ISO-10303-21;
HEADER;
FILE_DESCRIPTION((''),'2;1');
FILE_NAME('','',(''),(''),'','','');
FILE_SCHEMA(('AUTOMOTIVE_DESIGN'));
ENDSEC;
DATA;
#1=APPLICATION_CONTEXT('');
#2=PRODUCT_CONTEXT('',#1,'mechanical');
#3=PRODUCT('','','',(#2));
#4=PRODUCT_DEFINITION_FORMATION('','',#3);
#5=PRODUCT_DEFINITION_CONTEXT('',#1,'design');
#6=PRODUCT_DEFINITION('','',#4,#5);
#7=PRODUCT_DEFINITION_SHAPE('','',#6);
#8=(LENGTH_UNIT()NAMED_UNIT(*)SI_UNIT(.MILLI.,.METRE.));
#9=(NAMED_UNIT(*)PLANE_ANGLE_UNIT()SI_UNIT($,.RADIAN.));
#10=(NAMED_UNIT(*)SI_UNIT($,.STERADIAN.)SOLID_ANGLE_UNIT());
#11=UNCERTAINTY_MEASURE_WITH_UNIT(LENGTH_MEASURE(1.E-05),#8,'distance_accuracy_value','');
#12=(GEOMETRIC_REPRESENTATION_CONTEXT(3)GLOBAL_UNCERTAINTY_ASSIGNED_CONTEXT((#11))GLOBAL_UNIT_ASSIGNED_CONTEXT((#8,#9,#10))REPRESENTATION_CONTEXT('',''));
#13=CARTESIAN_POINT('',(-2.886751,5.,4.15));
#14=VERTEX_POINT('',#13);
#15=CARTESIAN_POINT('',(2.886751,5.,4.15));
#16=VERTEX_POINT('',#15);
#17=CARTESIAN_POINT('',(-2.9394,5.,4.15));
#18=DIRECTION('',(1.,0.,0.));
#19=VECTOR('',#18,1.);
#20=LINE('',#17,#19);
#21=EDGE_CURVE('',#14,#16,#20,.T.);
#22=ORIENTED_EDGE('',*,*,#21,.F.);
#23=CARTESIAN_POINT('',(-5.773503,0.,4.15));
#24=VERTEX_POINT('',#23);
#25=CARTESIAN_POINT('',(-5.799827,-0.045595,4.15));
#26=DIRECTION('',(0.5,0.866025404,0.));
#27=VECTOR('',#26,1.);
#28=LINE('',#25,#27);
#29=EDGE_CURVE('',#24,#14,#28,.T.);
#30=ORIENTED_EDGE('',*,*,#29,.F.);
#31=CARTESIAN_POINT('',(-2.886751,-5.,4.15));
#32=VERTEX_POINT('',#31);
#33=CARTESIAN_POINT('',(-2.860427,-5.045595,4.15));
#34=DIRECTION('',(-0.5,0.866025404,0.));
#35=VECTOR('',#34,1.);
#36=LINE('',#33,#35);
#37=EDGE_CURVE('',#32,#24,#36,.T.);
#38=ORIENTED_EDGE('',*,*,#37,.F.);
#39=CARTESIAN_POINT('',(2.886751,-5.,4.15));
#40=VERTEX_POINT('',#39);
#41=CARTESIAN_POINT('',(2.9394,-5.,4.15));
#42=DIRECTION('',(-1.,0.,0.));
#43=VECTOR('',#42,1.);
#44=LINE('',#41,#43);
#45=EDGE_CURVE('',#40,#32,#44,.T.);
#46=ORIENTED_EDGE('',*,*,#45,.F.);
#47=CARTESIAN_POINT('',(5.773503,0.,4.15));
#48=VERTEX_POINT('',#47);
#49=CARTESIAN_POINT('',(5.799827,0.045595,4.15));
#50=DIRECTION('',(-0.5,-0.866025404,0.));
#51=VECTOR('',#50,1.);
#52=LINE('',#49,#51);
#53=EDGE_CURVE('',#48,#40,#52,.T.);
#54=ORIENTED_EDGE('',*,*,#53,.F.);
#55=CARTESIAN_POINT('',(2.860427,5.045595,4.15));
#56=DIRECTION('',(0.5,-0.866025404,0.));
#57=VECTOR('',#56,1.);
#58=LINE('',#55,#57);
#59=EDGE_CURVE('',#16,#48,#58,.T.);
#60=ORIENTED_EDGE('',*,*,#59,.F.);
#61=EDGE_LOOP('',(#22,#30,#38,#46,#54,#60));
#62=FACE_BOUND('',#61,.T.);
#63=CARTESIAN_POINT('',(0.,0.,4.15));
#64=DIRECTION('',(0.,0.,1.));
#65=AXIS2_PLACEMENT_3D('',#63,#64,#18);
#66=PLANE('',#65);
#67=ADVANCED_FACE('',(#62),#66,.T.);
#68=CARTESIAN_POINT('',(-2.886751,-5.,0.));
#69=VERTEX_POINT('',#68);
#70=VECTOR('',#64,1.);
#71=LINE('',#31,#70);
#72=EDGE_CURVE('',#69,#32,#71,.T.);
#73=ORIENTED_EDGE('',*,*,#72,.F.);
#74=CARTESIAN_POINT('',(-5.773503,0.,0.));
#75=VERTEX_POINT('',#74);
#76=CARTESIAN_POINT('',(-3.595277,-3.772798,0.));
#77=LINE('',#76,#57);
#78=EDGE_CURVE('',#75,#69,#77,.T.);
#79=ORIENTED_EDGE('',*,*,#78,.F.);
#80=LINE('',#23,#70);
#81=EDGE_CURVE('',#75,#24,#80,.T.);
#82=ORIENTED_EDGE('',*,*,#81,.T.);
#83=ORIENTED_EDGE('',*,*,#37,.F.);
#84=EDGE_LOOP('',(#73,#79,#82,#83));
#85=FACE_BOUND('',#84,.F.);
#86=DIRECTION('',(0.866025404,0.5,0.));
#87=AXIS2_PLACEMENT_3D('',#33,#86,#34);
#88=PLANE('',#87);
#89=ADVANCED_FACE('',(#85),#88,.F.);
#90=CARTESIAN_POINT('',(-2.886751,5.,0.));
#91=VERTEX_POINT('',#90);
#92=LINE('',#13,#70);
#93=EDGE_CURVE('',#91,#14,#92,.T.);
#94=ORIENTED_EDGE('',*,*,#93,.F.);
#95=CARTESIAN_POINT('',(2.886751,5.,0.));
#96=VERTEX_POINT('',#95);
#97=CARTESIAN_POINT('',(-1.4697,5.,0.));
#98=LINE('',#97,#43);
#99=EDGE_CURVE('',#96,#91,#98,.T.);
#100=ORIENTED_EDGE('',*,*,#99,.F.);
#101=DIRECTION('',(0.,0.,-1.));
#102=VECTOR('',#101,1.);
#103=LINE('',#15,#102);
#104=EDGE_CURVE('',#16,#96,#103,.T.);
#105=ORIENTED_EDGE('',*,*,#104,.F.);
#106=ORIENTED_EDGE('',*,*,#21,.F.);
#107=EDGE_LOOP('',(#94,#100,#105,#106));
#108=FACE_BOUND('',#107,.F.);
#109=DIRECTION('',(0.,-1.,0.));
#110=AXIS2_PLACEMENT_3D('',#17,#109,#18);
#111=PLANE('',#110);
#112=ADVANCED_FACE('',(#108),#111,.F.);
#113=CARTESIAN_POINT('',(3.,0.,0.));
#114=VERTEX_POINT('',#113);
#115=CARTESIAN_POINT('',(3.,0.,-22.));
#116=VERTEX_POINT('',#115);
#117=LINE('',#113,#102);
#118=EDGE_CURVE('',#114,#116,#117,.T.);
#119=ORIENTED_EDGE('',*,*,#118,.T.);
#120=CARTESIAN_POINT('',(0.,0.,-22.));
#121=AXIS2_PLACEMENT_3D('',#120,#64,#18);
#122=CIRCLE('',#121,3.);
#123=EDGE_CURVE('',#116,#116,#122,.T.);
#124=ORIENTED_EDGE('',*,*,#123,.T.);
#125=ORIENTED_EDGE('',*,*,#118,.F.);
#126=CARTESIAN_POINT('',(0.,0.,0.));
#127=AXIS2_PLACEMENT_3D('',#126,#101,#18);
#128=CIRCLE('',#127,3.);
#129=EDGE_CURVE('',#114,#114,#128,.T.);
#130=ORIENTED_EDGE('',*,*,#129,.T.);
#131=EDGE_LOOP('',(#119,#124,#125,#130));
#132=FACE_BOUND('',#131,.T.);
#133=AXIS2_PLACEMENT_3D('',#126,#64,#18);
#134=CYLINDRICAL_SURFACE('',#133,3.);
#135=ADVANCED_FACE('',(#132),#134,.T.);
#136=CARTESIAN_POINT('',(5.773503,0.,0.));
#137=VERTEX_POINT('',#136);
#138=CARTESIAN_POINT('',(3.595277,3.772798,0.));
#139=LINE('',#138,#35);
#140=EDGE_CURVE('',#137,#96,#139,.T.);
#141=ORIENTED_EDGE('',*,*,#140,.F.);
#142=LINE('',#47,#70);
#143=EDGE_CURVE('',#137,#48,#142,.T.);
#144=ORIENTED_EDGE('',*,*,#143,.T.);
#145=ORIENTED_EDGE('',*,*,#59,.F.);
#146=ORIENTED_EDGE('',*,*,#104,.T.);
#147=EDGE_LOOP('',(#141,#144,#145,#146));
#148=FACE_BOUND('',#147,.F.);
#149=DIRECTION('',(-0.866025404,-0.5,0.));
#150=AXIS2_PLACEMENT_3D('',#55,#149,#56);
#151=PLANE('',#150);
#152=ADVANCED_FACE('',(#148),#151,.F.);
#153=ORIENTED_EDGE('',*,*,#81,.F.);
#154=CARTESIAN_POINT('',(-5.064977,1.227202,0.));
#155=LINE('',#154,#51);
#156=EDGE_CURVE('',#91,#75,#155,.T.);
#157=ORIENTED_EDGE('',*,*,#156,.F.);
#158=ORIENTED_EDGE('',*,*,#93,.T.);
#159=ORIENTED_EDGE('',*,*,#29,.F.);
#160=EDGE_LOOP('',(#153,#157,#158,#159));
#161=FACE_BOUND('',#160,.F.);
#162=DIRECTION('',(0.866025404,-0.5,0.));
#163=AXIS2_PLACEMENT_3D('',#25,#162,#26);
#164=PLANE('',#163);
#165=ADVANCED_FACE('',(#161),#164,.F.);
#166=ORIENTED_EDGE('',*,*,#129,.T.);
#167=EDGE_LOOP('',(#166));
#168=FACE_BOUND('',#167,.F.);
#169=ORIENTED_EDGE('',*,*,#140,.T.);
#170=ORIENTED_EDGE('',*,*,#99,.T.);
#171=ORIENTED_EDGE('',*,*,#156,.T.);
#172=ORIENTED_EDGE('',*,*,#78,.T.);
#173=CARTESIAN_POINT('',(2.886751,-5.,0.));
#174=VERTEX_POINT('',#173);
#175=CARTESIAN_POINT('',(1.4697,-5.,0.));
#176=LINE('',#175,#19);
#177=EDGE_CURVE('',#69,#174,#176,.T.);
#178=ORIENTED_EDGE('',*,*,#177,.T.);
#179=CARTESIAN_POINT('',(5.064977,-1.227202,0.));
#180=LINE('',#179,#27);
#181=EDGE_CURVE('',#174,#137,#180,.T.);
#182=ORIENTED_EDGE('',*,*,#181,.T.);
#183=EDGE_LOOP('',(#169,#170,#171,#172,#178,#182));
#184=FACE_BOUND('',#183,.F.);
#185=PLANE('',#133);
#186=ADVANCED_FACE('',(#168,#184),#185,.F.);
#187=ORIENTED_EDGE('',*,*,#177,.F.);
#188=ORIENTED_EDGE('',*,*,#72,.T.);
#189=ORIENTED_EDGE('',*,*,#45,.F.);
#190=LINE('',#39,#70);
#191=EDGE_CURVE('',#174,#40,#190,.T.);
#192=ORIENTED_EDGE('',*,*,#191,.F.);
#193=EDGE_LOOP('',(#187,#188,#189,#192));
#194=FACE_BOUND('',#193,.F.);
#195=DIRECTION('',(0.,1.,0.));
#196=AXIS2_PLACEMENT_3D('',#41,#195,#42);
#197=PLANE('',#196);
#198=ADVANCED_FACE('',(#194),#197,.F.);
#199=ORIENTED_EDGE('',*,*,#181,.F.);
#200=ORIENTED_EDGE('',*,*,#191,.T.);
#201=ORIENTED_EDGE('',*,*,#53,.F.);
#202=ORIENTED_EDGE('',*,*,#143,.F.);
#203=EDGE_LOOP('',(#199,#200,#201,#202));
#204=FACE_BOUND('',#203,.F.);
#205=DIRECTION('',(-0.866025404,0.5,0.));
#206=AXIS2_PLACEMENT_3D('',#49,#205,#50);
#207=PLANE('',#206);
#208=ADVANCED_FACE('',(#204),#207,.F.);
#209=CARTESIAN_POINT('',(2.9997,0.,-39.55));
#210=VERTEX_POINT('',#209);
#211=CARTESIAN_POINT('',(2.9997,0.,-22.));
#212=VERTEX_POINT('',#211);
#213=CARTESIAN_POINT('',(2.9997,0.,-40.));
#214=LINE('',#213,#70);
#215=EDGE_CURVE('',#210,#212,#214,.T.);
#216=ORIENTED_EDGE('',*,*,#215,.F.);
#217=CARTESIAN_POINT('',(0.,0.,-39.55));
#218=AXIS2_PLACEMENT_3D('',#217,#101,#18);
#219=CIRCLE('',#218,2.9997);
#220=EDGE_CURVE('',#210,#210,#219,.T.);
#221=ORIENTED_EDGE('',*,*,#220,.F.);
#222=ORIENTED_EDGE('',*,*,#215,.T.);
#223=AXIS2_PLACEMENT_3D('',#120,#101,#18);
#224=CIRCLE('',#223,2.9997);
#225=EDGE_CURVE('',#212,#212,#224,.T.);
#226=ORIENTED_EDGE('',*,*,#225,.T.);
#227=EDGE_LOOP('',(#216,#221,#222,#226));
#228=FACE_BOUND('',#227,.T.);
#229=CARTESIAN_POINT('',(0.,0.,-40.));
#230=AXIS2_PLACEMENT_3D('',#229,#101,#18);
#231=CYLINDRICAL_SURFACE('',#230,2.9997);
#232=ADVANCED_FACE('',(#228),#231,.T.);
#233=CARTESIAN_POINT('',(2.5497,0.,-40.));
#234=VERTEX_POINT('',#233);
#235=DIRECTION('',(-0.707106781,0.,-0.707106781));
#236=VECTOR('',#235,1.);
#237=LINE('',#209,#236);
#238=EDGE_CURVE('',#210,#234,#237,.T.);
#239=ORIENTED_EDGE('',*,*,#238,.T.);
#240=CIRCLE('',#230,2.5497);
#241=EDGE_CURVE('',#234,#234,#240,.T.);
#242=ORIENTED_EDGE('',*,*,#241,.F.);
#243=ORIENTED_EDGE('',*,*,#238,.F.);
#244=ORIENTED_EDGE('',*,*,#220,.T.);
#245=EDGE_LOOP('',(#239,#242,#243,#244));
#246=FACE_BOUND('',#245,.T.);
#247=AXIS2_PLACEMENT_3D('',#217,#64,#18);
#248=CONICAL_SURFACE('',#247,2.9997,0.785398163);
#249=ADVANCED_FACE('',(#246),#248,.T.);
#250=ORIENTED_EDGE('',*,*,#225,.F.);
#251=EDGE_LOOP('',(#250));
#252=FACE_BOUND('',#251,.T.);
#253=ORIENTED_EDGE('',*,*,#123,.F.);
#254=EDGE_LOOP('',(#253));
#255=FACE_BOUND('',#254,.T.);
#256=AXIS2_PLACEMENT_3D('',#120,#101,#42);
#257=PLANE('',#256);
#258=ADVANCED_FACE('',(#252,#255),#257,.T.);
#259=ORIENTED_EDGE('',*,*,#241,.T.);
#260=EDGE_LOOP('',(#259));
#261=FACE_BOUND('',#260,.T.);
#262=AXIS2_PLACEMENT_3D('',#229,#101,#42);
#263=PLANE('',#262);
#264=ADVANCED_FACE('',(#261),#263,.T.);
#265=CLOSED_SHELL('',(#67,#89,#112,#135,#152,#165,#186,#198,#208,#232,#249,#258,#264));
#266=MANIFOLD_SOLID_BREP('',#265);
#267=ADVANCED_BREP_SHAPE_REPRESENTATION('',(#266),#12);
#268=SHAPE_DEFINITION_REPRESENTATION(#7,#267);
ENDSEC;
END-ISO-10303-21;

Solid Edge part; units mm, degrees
sketch "Sketch1" plane through (0, 0, 0) normal (0, 0, 1) x (1, 0, 0)
  circle A0 centre (0, 0) radius 5.8
  dimension "D1" = 11.6
extrude "Protrusion1" add sketch "Sketch1" along normal blind 4.15
sketch "Sketch2" plane through (0, 0, 0) normal (0, 0, -1) x (1, 0, 0)
  circle A0 centre (0, 0) radius 3
extrude "Protrusion2" add sketch "Sketch2" along normal blind 40
sketch "Sketch3" plane through (0, 0, -40) normal (0, 0, -1) x (1, 0, 0)
  circle A0 centre (0, 0) radius 2.9997
extrude "Cutout1" cut sketch "Sketch3" against normal blind 18 flip side to cut
chamfer "Chamfer_1" distance 0.45 angle 45 1 edges at (-2.9997, 0, -40)
sketch "Sketch4" plane through (0, 0, 4.15) normal (0, 0, 1) x (1, 0, 0)
  line L0 (-2.9394, 5) -> (2.9394, 5)
  dimension "D1" = 10
extrude "Cutout2" cut sketch "Sketch4" against normal up to next material side at (0, 5.05, 4.15)
pattern_circular "Pattern1" count 6 over 360 about axis through (0, 0, 4.15) along (0, 0, 1) of "Cutout2"
properties part number "24101449"
